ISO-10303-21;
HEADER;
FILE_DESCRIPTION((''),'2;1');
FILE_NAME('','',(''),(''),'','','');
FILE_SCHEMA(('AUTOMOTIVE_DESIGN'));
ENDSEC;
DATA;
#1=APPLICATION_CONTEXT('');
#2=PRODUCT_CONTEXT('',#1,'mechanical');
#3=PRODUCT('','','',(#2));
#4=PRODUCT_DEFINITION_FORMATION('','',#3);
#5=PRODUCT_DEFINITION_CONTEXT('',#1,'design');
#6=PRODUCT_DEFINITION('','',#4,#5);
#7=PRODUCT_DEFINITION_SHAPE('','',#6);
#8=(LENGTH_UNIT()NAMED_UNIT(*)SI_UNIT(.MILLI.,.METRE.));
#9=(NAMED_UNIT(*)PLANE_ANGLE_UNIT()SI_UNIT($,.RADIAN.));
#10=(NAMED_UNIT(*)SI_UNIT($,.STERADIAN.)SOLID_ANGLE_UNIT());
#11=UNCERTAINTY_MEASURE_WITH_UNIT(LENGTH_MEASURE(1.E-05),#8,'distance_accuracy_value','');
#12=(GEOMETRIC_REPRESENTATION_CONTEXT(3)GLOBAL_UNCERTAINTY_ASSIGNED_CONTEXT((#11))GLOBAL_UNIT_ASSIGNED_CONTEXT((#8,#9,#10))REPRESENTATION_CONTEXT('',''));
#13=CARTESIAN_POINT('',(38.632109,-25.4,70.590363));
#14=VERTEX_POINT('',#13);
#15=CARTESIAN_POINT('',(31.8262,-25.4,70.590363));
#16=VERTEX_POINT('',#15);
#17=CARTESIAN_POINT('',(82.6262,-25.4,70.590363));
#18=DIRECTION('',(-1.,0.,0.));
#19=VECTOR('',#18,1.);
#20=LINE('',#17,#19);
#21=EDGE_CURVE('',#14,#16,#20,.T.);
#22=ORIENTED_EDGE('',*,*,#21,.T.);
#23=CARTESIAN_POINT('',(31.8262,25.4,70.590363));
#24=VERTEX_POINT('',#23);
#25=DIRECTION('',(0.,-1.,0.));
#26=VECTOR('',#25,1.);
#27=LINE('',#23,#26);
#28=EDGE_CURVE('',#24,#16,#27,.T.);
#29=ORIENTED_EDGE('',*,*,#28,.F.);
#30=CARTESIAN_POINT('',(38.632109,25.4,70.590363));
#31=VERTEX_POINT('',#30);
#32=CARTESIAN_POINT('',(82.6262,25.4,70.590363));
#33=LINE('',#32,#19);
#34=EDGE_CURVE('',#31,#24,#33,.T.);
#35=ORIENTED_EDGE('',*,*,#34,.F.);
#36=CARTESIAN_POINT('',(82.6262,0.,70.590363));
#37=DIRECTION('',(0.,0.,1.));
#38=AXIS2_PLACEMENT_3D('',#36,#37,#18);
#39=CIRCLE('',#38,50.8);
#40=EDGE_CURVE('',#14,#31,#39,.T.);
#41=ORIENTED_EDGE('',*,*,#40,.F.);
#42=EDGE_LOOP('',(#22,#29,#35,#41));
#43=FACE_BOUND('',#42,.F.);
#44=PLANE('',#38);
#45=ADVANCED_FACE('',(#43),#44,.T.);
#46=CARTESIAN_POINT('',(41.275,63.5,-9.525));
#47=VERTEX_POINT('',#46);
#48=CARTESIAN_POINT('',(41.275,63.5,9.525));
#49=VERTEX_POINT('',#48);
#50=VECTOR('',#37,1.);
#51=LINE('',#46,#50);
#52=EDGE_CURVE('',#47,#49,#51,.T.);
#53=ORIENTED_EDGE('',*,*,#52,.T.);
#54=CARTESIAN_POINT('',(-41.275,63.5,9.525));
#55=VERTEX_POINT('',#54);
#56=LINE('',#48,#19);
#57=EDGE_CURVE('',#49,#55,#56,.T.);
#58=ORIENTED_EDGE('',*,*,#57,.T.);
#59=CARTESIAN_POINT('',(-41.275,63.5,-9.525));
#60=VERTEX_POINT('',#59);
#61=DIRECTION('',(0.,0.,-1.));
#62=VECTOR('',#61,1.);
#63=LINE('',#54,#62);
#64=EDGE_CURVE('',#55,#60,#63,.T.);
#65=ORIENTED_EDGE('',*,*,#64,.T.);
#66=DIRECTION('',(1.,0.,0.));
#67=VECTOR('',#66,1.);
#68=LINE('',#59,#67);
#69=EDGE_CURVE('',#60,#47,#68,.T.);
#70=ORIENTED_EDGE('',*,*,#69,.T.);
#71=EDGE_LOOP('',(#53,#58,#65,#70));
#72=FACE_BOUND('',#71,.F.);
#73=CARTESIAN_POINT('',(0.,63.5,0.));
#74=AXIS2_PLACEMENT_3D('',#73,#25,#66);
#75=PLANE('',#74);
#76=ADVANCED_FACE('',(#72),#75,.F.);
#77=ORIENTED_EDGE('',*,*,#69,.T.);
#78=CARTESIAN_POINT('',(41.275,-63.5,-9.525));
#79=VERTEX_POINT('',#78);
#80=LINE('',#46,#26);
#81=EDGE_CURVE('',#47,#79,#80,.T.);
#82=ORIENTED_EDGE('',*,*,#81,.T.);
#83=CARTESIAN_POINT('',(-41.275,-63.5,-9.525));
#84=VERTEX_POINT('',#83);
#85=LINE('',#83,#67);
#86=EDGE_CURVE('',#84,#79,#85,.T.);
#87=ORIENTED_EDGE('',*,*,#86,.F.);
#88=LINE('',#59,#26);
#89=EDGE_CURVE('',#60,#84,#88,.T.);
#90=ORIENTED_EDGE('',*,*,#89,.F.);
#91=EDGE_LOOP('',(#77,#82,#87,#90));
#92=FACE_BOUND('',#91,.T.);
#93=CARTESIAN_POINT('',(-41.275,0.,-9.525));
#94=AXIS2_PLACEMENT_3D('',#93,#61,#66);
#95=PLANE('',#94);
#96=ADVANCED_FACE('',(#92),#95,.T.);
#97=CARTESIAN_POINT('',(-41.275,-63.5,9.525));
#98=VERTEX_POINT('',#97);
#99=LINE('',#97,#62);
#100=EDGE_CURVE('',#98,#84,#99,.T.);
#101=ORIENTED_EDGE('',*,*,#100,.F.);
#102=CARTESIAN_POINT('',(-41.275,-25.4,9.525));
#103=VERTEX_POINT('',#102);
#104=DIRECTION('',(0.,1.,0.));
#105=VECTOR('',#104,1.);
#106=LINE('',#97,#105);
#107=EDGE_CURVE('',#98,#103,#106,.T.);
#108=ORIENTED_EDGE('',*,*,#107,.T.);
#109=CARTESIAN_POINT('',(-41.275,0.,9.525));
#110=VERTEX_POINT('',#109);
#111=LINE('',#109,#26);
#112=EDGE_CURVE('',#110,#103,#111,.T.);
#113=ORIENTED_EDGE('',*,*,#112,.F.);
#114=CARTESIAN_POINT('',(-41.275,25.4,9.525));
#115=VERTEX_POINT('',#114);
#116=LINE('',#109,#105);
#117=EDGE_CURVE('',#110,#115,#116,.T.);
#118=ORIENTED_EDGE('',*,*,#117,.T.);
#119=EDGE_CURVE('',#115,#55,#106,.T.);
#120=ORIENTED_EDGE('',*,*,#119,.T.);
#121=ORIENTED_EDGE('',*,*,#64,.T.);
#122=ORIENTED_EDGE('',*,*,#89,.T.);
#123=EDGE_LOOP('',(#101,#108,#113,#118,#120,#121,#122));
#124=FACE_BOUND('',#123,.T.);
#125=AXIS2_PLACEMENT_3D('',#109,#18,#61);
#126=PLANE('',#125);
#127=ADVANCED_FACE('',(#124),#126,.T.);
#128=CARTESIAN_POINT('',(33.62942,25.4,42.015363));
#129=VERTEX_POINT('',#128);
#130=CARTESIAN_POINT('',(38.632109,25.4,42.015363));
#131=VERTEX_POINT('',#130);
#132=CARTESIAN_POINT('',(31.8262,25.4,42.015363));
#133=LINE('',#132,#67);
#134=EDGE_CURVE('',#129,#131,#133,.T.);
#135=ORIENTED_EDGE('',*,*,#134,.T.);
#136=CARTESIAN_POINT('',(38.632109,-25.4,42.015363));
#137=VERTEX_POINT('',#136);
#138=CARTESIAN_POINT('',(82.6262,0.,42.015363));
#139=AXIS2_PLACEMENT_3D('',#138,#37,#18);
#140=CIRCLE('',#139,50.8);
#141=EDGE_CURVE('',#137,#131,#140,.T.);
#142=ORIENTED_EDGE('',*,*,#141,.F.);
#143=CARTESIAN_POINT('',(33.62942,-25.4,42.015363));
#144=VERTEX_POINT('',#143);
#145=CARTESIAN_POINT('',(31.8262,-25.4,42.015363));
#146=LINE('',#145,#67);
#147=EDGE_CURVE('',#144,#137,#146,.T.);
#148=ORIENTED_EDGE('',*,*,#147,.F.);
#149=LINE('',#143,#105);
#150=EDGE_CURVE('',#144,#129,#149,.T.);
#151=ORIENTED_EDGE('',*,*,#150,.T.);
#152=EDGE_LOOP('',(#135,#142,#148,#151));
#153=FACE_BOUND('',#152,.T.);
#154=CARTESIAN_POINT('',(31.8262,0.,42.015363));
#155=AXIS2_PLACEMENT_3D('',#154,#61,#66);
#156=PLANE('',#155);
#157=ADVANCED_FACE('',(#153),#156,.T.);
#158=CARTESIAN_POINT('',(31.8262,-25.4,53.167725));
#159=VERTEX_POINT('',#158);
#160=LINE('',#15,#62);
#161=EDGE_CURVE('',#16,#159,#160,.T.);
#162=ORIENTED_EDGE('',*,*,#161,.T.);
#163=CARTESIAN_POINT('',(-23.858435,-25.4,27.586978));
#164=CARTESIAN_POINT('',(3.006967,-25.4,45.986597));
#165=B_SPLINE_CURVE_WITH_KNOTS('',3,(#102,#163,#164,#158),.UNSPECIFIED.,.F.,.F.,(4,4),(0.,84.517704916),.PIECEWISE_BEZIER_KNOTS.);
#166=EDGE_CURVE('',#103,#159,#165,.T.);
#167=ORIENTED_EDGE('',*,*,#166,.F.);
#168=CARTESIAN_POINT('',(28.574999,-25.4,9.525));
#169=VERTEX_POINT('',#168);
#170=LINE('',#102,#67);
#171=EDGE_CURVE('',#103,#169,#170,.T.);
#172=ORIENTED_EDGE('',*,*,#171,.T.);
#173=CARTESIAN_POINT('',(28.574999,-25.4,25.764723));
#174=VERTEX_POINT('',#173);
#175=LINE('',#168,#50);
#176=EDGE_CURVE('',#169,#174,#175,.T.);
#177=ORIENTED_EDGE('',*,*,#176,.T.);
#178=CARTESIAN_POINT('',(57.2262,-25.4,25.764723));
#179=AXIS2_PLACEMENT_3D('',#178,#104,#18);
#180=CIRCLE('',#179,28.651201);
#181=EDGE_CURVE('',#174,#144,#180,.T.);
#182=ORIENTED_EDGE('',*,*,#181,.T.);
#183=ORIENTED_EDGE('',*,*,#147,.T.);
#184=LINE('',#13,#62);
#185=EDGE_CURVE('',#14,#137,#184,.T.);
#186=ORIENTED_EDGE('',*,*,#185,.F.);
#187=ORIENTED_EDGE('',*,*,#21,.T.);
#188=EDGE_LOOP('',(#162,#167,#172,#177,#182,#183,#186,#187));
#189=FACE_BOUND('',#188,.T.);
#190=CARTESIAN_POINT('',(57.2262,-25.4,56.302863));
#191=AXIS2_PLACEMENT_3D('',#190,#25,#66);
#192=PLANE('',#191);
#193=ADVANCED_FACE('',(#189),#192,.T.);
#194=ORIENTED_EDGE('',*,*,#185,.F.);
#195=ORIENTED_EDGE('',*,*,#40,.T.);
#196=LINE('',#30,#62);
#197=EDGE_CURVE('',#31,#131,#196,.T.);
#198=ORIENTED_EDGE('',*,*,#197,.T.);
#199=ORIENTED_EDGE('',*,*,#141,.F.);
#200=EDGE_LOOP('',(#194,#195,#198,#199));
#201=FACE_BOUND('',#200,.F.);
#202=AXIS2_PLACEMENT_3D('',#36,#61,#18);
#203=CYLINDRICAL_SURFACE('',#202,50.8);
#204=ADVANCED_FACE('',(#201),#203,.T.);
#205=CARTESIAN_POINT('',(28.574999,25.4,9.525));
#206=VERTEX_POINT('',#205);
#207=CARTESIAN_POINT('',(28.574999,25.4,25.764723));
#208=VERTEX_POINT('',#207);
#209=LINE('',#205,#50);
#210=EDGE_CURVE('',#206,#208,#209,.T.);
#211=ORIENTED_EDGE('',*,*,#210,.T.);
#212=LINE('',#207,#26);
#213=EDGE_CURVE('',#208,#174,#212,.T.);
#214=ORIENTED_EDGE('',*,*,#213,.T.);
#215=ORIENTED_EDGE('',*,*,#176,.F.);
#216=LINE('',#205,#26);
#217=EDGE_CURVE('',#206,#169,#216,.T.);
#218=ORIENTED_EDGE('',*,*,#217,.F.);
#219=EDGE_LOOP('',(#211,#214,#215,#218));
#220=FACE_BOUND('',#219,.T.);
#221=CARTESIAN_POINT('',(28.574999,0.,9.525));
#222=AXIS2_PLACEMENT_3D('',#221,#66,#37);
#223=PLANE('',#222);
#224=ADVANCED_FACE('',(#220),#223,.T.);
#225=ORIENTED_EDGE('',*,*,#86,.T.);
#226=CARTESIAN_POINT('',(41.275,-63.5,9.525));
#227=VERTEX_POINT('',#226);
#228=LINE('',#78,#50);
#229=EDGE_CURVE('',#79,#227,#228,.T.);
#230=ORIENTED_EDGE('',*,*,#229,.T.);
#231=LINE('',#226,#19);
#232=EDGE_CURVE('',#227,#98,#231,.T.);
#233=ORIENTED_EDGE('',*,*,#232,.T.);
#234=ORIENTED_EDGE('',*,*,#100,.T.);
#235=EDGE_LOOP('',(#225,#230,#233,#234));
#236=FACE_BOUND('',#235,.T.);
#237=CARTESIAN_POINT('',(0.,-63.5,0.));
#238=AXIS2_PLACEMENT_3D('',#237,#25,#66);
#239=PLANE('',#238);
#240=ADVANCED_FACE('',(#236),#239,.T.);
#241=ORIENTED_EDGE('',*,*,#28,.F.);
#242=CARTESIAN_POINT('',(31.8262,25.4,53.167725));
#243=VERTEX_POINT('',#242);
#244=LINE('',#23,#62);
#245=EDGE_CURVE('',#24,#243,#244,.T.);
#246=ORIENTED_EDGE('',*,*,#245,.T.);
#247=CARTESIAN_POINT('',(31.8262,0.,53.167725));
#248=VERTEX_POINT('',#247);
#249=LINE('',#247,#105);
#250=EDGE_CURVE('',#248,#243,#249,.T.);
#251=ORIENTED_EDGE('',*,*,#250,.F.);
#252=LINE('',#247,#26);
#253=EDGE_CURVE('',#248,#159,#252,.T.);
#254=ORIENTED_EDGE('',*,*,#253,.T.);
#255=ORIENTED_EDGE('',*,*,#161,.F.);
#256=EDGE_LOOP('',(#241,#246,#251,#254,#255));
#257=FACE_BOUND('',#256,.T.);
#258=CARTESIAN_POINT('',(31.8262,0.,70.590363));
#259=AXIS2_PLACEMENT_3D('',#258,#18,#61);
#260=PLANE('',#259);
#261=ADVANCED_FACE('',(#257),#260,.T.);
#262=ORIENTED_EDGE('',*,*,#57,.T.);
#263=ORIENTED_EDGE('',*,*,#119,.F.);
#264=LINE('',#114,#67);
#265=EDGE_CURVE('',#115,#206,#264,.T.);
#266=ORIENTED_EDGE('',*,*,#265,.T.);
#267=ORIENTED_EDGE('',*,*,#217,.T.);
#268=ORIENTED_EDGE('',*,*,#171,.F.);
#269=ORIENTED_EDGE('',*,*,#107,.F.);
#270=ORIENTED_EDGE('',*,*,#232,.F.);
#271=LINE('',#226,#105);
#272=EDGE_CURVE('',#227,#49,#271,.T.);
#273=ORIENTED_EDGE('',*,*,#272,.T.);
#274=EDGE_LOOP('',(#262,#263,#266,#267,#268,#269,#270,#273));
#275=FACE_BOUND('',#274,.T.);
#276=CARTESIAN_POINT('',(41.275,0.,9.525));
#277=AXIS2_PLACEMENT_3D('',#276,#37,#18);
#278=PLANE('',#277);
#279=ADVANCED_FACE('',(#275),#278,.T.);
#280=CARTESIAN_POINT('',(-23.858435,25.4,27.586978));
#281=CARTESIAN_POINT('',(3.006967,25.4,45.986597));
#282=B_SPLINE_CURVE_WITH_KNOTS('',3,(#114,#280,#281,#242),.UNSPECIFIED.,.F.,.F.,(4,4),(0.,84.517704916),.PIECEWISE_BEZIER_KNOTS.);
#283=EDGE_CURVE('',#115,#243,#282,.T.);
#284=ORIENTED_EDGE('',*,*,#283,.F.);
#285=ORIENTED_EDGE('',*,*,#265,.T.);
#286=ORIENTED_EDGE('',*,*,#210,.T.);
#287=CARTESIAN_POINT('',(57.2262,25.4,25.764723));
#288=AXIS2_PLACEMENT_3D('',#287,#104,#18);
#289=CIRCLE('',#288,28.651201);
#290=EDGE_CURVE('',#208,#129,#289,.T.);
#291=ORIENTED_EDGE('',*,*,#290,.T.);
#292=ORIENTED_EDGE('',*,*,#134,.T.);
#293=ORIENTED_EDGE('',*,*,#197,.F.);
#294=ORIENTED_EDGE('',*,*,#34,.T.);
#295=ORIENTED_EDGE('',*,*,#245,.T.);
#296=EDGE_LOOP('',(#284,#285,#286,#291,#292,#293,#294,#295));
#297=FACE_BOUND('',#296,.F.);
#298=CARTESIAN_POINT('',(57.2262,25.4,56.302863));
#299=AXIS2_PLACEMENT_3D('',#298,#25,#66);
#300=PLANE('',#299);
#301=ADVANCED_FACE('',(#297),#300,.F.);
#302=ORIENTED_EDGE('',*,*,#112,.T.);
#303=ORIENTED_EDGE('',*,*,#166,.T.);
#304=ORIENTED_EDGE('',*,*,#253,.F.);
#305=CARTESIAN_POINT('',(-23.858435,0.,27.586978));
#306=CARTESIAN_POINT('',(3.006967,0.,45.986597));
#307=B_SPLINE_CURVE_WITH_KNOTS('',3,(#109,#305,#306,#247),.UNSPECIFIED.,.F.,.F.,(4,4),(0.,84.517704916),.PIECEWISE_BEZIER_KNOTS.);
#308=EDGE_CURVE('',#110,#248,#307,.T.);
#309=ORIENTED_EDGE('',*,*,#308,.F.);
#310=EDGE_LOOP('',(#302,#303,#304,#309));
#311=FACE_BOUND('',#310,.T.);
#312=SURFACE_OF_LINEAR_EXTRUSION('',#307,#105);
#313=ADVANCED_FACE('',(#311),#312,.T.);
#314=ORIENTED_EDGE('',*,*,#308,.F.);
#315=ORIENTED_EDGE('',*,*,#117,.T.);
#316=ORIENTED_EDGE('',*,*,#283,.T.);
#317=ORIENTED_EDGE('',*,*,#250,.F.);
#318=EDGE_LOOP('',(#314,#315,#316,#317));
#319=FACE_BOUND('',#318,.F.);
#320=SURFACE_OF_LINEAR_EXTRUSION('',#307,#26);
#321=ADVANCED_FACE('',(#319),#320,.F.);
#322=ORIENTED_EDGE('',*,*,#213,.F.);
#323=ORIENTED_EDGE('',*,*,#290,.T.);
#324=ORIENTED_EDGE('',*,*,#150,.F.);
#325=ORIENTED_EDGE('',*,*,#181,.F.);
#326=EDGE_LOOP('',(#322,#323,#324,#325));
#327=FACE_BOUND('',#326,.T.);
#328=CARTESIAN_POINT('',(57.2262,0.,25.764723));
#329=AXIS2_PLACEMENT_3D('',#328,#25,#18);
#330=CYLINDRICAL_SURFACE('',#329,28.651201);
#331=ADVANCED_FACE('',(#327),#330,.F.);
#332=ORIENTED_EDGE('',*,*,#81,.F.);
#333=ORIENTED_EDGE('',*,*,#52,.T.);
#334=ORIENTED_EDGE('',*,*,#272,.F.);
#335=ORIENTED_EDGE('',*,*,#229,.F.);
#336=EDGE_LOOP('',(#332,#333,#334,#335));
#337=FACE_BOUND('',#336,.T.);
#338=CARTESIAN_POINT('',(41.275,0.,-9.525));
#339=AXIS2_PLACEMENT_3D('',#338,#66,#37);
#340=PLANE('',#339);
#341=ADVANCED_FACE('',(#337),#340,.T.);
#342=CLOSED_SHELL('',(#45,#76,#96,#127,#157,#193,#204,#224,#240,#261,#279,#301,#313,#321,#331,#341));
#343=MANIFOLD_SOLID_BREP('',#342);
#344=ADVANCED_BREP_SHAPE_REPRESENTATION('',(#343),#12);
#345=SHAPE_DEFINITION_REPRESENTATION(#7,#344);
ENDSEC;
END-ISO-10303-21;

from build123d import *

# Parameters (mm, degrees)
F1_DEPTH = 63.5
F2_DEPTH = 25.4
F3_DEPTH = 25.4


# Not quite as in the source:
# - a feature names something its author has since deleted; it is built from what else it names


with BuildPart() as f1:
    # F0 (on Front) → F1 (new body, symmetric)
    with BuildSketch(Plane.XZ):
        Polygon((28.5749990565, 9.525), (-41.275, 9.525), (-41.275, -9.525), (41.275, -9.525), (41.275, 9.525), align=None)
    extrude(amount=F1_DEPTH, both=True)

    # F0 (on Front) → F2 (join, symmetric)
    with BuildSketch(Plane.XZ):
        with BuildLine():
            add(Edge.make_bspline(
                [(-41.275, 9.525), (-23.8584346144, 27.5869780948), (3.0069667421, 45.9865968148), (31.8262, 53.1677247911)],
                knots=[0, 0, 0, 0, 84.5177049164, 84.5177049164, 84.5177049164, 84.5177049164], degree=3))
            Line((-41.275, 9.525), (28.5749990565, 9.525))
            Line((28.5749990565, 9.525), (28.5749990565, 25.7647229111))
            ThreePointArc((28.5749990565, 25.7647229111), (29.8677699589, 34.2739896946), (33.6294204286, 42.0153631867))
            Line((33.6294204286, 42.0153631867), (31.8262, 42.0153631867))
            Line((31.8262, 42.0153631867), (31.8262, 53.1677247911))
        make_face()
    extrude(amount=F2_DEPTH, both=True)

    # F0 (on Front) → F3 (join, symmetric)
    with BuildSketch(Plane.XZ):
        Polygon((31.8262, 70.5903631867), (31.8262, 53.1677247911), (31.8262, 42.0153631867), (33.6294204286, 42.0153631867), (82.6262, 42.0153631867), (82.6262, 70.5903631867), align=None)
    extrude(amount=F3_DEPTH, both=True)

    # F0 (on Front) → F6 (revolve)
    with BuildSketch(Plane.XZ):
        Polygon((31.8262, 70.5903631867), (31.8262, 53.1677247911), (31.8262, 42.0153631867), (33.6294204286, 42.0153631867), (82.6262, 42.0153631867), (82.6262, 70.5903631867), align=None)
    revolve(axis=Axis((82.6262, 0, 56.3028631867), (0, 0, 1)))


solid = f1.part
